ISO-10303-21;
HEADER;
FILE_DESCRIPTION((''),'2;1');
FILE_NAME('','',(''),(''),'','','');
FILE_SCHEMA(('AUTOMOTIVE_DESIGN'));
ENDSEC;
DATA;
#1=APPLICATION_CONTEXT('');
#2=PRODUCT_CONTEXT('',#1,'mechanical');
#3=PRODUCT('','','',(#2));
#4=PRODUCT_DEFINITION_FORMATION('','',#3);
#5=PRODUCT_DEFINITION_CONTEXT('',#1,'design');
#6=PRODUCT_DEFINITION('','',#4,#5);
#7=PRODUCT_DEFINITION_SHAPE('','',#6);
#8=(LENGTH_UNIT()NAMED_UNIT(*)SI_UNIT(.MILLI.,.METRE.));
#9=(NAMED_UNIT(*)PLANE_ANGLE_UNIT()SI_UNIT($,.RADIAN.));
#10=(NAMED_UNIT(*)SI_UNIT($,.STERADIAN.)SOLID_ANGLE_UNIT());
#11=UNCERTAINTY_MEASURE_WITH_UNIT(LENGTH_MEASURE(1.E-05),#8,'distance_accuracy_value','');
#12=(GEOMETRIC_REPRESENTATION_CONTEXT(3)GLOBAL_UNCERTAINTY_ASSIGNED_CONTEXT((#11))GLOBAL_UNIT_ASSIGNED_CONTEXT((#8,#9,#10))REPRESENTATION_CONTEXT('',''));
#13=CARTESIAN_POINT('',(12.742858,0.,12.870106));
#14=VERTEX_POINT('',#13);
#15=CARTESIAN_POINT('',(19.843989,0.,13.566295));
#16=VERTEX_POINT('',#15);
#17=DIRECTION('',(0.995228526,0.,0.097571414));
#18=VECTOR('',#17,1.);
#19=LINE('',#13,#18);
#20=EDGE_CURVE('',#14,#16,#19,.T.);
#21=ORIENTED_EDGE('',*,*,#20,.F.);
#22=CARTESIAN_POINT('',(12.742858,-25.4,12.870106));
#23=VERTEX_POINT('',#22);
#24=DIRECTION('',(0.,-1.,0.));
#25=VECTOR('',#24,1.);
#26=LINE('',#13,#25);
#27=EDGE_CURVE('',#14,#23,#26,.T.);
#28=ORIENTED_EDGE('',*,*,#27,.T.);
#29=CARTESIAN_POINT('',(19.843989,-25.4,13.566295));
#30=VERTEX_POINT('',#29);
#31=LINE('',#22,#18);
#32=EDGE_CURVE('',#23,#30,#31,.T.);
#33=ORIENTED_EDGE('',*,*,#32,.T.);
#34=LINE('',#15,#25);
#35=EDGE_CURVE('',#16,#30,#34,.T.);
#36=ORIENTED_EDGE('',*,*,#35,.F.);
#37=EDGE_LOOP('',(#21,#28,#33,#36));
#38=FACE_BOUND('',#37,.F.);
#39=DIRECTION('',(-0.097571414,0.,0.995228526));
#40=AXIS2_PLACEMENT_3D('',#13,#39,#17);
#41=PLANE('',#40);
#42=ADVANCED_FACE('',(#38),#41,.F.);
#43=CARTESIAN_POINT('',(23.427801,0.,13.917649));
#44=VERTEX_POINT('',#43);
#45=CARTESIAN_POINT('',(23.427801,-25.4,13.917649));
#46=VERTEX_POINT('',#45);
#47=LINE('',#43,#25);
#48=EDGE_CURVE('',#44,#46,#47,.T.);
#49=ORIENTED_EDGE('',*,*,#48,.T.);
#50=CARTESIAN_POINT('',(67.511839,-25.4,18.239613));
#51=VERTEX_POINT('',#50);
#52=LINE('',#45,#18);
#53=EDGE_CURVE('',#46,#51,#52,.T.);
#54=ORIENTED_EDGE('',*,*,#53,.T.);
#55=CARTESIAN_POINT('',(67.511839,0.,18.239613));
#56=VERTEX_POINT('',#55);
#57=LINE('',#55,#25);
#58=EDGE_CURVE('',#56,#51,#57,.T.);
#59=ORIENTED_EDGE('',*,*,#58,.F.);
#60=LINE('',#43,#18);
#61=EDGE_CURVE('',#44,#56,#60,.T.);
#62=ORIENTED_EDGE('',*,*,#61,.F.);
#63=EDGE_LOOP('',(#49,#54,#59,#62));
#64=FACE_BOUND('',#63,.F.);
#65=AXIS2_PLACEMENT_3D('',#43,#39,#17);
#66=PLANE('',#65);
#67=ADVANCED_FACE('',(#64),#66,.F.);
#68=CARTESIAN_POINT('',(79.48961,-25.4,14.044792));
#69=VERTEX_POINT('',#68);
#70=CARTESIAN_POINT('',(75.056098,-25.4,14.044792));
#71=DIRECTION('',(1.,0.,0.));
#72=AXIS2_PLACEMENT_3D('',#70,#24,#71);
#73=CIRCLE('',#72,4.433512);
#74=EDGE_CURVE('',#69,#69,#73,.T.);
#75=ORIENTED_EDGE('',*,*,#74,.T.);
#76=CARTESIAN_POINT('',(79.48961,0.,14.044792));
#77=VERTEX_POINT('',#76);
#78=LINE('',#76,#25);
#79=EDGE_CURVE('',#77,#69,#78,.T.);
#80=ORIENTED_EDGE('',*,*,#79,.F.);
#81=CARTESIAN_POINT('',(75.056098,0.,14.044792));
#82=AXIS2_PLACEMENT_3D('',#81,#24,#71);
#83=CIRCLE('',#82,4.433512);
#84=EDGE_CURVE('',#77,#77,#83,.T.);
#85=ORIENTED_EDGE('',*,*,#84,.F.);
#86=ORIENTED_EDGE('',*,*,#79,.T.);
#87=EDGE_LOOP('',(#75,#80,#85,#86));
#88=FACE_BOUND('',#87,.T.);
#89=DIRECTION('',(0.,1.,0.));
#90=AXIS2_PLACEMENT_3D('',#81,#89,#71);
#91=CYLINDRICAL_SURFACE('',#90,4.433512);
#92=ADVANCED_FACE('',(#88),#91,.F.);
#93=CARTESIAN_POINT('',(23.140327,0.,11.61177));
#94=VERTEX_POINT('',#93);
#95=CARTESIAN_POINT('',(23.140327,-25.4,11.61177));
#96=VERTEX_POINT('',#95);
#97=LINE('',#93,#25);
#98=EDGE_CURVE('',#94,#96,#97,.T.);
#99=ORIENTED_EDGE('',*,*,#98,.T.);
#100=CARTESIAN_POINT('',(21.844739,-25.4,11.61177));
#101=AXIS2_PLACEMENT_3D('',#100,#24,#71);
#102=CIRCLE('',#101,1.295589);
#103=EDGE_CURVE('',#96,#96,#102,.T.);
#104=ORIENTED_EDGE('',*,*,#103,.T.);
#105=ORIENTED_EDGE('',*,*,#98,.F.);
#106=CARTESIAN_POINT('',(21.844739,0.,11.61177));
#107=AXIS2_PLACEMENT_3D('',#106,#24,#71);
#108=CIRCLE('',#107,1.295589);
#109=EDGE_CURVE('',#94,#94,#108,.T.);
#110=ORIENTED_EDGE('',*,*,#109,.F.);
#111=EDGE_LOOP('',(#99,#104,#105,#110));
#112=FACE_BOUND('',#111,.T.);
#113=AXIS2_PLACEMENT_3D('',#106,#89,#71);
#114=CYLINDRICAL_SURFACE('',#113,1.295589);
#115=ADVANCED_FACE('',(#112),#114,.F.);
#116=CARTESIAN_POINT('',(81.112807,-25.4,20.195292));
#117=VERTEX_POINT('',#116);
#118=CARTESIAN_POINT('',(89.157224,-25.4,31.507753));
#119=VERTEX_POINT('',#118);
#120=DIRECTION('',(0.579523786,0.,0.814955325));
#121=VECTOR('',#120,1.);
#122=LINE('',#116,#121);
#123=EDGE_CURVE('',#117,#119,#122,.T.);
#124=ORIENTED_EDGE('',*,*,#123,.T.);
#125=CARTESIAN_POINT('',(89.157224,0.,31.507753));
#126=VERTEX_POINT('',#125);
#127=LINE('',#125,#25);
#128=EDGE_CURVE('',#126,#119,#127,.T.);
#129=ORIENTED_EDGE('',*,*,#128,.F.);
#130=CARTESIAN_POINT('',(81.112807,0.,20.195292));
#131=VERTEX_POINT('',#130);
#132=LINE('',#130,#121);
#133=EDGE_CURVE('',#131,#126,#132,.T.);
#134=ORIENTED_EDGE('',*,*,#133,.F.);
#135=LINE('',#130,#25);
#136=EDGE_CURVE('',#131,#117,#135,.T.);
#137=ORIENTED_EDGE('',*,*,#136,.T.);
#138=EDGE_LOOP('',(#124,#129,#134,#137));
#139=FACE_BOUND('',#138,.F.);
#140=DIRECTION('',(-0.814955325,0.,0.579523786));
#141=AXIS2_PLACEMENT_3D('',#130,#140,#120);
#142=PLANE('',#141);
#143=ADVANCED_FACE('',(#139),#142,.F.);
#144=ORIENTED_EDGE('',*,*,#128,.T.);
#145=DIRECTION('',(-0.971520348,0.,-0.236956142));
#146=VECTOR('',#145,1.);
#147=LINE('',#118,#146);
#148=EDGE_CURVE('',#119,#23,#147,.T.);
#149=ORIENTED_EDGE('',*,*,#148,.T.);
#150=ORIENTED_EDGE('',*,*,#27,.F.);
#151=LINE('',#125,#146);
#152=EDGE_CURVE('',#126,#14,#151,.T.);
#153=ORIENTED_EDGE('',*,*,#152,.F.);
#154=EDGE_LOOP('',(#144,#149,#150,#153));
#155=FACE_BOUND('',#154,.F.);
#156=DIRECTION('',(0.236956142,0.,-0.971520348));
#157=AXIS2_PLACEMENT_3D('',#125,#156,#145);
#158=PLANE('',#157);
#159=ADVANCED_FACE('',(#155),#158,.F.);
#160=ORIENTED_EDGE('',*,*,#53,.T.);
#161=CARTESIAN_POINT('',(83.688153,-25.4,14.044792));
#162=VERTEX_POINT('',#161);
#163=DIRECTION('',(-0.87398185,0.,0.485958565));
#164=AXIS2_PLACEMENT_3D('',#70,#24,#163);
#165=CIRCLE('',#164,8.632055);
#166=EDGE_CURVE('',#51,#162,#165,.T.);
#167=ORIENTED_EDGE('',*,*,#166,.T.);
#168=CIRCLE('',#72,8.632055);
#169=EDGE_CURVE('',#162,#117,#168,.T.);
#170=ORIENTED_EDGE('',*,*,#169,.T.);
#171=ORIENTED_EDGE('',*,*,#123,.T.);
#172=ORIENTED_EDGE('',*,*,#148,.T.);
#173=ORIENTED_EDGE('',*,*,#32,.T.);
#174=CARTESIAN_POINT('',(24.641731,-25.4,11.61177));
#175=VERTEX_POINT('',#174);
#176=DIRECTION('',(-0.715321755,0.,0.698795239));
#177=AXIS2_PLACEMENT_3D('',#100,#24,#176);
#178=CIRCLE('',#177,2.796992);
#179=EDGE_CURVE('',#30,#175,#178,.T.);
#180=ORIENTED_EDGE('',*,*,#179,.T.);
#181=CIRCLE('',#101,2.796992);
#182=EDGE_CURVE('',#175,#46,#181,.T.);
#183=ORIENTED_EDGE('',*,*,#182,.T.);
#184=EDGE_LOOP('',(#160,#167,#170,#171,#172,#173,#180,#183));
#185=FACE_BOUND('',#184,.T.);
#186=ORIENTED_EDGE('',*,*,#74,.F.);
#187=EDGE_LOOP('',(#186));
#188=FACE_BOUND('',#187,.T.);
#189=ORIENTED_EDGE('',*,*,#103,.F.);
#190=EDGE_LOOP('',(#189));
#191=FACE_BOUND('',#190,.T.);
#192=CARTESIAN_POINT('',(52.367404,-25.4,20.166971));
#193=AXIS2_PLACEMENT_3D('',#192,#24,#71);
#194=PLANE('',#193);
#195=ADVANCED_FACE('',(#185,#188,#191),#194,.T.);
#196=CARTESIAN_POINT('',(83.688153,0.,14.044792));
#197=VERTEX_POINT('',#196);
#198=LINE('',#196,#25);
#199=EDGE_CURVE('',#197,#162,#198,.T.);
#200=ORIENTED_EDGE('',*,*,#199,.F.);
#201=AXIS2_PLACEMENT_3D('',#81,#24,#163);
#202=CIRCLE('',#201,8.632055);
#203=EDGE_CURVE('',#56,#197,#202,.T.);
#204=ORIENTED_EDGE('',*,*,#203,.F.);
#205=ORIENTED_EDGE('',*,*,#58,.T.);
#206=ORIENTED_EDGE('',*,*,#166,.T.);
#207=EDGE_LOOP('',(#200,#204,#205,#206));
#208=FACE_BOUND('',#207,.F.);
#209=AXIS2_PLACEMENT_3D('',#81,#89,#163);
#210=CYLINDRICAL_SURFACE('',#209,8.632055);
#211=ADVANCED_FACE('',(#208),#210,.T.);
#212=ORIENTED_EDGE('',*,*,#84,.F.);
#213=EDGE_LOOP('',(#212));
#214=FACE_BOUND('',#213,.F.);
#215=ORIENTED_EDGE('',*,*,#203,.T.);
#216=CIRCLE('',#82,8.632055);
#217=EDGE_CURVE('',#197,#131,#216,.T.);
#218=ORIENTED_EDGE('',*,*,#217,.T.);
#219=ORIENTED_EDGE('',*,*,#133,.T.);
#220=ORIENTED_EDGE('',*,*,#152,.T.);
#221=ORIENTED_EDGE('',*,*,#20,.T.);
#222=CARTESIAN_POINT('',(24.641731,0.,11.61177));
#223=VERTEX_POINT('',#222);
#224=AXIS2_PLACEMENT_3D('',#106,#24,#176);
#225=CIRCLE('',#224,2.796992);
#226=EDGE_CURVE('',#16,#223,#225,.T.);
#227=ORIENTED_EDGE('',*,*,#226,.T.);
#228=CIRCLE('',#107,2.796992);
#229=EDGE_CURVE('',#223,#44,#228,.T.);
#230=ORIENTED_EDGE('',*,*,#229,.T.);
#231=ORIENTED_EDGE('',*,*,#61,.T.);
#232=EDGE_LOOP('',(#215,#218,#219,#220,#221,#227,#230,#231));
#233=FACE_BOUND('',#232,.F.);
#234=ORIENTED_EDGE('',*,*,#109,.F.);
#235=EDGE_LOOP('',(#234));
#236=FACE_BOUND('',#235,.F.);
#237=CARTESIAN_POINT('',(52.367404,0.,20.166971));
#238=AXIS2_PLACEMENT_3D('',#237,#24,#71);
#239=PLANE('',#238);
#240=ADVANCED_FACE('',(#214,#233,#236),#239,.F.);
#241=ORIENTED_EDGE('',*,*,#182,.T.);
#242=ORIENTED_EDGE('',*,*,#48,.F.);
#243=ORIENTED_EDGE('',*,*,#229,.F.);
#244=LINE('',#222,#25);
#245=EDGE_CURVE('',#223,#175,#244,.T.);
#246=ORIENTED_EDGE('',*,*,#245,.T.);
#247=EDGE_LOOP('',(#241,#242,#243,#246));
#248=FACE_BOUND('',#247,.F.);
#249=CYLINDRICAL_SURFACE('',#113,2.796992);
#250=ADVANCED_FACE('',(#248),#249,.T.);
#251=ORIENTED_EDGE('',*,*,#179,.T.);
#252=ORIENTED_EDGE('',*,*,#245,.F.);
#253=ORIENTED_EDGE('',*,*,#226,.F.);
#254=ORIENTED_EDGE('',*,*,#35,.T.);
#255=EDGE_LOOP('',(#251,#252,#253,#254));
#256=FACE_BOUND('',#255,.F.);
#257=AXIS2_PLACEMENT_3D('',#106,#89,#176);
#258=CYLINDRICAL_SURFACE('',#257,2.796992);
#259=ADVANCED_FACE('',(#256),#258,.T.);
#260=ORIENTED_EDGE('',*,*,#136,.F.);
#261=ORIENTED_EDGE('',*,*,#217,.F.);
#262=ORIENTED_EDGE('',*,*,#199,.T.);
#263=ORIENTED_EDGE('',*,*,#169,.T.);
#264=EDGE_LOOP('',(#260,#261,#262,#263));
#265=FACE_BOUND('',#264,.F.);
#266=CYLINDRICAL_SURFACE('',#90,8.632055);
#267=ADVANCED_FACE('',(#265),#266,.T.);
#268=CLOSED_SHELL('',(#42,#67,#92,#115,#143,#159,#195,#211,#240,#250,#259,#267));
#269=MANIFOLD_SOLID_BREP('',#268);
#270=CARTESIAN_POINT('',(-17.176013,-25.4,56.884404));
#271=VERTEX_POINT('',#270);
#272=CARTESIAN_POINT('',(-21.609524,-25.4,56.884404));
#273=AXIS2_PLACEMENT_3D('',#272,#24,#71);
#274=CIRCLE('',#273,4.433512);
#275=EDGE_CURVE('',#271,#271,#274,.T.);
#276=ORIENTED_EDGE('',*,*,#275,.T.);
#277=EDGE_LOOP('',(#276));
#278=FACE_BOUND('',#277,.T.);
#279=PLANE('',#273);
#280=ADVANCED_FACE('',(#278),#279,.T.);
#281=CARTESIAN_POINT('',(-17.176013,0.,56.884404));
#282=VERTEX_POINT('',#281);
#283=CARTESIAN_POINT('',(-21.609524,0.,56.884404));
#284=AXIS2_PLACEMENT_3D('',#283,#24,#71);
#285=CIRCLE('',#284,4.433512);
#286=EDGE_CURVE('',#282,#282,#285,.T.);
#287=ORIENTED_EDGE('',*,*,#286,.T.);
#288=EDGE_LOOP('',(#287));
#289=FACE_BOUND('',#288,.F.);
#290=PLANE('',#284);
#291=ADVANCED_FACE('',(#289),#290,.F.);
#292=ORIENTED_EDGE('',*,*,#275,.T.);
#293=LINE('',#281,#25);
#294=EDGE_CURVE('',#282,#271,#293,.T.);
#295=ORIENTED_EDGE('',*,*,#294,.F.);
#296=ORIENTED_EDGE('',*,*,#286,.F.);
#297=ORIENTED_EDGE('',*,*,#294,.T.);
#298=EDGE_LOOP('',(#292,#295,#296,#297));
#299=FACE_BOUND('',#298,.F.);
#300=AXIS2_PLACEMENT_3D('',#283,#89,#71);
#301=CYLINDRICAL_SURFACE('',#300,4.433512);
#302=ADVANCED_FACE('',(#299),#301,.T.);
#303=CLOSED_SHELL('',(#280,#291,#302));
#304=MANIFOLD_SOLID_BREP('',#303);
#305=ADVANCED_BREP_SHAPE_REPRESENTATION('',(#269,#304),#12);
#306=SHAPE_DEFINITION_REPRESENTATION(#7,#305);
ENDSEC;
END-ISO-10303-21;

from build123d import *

# Parameters (mm, degrees)
F0_R     = 1.2955888687
F0_R_2   = 4.4335115967
F1_DEPTH = 25.4


with BuildPart() as f1:
    # F0 (on Front) → F1 (new body)
    with BuildSketch(Plane.XZ):
        with BuildLine():
            Line((89.1572237015, 31.5077528358), (12.7428583801, 12.8701059148))
            Line((12.7428583801, 12.8701059148), (19.8439891704, 13.5662951334))
            ThreePointArc((19.8439891704, 13.5662951334), (21.5718320787, 14.3954167349), (23.4278013561, 13.9176492317))
            Line((23.4278013561, 13.9176492317), (67.5118393184, 18.2396132754))
            ThreePointArc((67.5118393184, 18.2396132754), (73.8275336357, 22.5889714613), (81.112807161, 20.1952920757))
            Line((81.112807161, 20.1952920757), (89.1572237015, 31.5077528358))
        make_face()
        with BuildLine():
            ThreePointArc((23.4278013561, 13.9176492317), (21.5718320787, 14.3954167349), (19.8439891704, 13.5662951334))
            Line((19.8439891704, 13.5662951334), (23.4278013561, 13.9176492317))
        make_face()
        with BuildLine():
            Line((23.4278013561, 13.9176492317), (19.8439891704, 13.5662951334))
            ThreePointArc((19.8439891704, 13.5662951334), (20.7894933235, 9.0214762693), (24.6417307995, 11.6117702758))
            ThreePointArc((24.6417307995, 11.6117702758), (24.3197112814, 12.9147190903), (23.4278013561, 13.9176492317))
        make_face()
        with Locations((21.8447385651, 11.6117702758)):
            Circle(F0_R, mode=Mode.SUBTRACT)
        with BuildLine():
            ThreePointArc((83.6881530447, 14.0447923914), (83.0183282504, 17.3787484794), (81.112807161, 20.1952920757))
            Line((81.112807161, 20.1952920757), (80.6371569633, 19.5264089853))
            Line((80.6371569633, 19.5264089853), (67.5118393184, 18.2396132754))
            ThreePointArc((67.5118393184, 18.2396132754), (72.8893138351, 5.6891109706), (83.6881530447, 14.0447923914))
        make_face()
        with Locations((75.0560984015, 14.0447923914)):
            Circle(F0_R_2, mode=Mode.SUBTRACT)
        with BuildLine():
            Line((80.6371569633, 19.5264089853), (81.112807161, 20.1952920757))
            ThreePointArc((81.112807161, 20.1952920757), (73.8275336357, 22.5889714613), (67.5118393184, 18.2396132754))
            Line((67.5118393184, 18.2396132754), (80.6371569633, 19.5264089853))
        make_face()
    extrude(amount=F1_DEPTH)


with BuildPart() as f1b:
    # F0 (on Front) → F1, piece 2 (new body)
    with BuildSketch(Plane.XZ):
        with Locations((-21.6095242649, 56.8844042718)):
            Circle(F0_R_2)
    extrude(amount=F1_DEPTH)


solid = Compound([f1.part, f1b.part])
